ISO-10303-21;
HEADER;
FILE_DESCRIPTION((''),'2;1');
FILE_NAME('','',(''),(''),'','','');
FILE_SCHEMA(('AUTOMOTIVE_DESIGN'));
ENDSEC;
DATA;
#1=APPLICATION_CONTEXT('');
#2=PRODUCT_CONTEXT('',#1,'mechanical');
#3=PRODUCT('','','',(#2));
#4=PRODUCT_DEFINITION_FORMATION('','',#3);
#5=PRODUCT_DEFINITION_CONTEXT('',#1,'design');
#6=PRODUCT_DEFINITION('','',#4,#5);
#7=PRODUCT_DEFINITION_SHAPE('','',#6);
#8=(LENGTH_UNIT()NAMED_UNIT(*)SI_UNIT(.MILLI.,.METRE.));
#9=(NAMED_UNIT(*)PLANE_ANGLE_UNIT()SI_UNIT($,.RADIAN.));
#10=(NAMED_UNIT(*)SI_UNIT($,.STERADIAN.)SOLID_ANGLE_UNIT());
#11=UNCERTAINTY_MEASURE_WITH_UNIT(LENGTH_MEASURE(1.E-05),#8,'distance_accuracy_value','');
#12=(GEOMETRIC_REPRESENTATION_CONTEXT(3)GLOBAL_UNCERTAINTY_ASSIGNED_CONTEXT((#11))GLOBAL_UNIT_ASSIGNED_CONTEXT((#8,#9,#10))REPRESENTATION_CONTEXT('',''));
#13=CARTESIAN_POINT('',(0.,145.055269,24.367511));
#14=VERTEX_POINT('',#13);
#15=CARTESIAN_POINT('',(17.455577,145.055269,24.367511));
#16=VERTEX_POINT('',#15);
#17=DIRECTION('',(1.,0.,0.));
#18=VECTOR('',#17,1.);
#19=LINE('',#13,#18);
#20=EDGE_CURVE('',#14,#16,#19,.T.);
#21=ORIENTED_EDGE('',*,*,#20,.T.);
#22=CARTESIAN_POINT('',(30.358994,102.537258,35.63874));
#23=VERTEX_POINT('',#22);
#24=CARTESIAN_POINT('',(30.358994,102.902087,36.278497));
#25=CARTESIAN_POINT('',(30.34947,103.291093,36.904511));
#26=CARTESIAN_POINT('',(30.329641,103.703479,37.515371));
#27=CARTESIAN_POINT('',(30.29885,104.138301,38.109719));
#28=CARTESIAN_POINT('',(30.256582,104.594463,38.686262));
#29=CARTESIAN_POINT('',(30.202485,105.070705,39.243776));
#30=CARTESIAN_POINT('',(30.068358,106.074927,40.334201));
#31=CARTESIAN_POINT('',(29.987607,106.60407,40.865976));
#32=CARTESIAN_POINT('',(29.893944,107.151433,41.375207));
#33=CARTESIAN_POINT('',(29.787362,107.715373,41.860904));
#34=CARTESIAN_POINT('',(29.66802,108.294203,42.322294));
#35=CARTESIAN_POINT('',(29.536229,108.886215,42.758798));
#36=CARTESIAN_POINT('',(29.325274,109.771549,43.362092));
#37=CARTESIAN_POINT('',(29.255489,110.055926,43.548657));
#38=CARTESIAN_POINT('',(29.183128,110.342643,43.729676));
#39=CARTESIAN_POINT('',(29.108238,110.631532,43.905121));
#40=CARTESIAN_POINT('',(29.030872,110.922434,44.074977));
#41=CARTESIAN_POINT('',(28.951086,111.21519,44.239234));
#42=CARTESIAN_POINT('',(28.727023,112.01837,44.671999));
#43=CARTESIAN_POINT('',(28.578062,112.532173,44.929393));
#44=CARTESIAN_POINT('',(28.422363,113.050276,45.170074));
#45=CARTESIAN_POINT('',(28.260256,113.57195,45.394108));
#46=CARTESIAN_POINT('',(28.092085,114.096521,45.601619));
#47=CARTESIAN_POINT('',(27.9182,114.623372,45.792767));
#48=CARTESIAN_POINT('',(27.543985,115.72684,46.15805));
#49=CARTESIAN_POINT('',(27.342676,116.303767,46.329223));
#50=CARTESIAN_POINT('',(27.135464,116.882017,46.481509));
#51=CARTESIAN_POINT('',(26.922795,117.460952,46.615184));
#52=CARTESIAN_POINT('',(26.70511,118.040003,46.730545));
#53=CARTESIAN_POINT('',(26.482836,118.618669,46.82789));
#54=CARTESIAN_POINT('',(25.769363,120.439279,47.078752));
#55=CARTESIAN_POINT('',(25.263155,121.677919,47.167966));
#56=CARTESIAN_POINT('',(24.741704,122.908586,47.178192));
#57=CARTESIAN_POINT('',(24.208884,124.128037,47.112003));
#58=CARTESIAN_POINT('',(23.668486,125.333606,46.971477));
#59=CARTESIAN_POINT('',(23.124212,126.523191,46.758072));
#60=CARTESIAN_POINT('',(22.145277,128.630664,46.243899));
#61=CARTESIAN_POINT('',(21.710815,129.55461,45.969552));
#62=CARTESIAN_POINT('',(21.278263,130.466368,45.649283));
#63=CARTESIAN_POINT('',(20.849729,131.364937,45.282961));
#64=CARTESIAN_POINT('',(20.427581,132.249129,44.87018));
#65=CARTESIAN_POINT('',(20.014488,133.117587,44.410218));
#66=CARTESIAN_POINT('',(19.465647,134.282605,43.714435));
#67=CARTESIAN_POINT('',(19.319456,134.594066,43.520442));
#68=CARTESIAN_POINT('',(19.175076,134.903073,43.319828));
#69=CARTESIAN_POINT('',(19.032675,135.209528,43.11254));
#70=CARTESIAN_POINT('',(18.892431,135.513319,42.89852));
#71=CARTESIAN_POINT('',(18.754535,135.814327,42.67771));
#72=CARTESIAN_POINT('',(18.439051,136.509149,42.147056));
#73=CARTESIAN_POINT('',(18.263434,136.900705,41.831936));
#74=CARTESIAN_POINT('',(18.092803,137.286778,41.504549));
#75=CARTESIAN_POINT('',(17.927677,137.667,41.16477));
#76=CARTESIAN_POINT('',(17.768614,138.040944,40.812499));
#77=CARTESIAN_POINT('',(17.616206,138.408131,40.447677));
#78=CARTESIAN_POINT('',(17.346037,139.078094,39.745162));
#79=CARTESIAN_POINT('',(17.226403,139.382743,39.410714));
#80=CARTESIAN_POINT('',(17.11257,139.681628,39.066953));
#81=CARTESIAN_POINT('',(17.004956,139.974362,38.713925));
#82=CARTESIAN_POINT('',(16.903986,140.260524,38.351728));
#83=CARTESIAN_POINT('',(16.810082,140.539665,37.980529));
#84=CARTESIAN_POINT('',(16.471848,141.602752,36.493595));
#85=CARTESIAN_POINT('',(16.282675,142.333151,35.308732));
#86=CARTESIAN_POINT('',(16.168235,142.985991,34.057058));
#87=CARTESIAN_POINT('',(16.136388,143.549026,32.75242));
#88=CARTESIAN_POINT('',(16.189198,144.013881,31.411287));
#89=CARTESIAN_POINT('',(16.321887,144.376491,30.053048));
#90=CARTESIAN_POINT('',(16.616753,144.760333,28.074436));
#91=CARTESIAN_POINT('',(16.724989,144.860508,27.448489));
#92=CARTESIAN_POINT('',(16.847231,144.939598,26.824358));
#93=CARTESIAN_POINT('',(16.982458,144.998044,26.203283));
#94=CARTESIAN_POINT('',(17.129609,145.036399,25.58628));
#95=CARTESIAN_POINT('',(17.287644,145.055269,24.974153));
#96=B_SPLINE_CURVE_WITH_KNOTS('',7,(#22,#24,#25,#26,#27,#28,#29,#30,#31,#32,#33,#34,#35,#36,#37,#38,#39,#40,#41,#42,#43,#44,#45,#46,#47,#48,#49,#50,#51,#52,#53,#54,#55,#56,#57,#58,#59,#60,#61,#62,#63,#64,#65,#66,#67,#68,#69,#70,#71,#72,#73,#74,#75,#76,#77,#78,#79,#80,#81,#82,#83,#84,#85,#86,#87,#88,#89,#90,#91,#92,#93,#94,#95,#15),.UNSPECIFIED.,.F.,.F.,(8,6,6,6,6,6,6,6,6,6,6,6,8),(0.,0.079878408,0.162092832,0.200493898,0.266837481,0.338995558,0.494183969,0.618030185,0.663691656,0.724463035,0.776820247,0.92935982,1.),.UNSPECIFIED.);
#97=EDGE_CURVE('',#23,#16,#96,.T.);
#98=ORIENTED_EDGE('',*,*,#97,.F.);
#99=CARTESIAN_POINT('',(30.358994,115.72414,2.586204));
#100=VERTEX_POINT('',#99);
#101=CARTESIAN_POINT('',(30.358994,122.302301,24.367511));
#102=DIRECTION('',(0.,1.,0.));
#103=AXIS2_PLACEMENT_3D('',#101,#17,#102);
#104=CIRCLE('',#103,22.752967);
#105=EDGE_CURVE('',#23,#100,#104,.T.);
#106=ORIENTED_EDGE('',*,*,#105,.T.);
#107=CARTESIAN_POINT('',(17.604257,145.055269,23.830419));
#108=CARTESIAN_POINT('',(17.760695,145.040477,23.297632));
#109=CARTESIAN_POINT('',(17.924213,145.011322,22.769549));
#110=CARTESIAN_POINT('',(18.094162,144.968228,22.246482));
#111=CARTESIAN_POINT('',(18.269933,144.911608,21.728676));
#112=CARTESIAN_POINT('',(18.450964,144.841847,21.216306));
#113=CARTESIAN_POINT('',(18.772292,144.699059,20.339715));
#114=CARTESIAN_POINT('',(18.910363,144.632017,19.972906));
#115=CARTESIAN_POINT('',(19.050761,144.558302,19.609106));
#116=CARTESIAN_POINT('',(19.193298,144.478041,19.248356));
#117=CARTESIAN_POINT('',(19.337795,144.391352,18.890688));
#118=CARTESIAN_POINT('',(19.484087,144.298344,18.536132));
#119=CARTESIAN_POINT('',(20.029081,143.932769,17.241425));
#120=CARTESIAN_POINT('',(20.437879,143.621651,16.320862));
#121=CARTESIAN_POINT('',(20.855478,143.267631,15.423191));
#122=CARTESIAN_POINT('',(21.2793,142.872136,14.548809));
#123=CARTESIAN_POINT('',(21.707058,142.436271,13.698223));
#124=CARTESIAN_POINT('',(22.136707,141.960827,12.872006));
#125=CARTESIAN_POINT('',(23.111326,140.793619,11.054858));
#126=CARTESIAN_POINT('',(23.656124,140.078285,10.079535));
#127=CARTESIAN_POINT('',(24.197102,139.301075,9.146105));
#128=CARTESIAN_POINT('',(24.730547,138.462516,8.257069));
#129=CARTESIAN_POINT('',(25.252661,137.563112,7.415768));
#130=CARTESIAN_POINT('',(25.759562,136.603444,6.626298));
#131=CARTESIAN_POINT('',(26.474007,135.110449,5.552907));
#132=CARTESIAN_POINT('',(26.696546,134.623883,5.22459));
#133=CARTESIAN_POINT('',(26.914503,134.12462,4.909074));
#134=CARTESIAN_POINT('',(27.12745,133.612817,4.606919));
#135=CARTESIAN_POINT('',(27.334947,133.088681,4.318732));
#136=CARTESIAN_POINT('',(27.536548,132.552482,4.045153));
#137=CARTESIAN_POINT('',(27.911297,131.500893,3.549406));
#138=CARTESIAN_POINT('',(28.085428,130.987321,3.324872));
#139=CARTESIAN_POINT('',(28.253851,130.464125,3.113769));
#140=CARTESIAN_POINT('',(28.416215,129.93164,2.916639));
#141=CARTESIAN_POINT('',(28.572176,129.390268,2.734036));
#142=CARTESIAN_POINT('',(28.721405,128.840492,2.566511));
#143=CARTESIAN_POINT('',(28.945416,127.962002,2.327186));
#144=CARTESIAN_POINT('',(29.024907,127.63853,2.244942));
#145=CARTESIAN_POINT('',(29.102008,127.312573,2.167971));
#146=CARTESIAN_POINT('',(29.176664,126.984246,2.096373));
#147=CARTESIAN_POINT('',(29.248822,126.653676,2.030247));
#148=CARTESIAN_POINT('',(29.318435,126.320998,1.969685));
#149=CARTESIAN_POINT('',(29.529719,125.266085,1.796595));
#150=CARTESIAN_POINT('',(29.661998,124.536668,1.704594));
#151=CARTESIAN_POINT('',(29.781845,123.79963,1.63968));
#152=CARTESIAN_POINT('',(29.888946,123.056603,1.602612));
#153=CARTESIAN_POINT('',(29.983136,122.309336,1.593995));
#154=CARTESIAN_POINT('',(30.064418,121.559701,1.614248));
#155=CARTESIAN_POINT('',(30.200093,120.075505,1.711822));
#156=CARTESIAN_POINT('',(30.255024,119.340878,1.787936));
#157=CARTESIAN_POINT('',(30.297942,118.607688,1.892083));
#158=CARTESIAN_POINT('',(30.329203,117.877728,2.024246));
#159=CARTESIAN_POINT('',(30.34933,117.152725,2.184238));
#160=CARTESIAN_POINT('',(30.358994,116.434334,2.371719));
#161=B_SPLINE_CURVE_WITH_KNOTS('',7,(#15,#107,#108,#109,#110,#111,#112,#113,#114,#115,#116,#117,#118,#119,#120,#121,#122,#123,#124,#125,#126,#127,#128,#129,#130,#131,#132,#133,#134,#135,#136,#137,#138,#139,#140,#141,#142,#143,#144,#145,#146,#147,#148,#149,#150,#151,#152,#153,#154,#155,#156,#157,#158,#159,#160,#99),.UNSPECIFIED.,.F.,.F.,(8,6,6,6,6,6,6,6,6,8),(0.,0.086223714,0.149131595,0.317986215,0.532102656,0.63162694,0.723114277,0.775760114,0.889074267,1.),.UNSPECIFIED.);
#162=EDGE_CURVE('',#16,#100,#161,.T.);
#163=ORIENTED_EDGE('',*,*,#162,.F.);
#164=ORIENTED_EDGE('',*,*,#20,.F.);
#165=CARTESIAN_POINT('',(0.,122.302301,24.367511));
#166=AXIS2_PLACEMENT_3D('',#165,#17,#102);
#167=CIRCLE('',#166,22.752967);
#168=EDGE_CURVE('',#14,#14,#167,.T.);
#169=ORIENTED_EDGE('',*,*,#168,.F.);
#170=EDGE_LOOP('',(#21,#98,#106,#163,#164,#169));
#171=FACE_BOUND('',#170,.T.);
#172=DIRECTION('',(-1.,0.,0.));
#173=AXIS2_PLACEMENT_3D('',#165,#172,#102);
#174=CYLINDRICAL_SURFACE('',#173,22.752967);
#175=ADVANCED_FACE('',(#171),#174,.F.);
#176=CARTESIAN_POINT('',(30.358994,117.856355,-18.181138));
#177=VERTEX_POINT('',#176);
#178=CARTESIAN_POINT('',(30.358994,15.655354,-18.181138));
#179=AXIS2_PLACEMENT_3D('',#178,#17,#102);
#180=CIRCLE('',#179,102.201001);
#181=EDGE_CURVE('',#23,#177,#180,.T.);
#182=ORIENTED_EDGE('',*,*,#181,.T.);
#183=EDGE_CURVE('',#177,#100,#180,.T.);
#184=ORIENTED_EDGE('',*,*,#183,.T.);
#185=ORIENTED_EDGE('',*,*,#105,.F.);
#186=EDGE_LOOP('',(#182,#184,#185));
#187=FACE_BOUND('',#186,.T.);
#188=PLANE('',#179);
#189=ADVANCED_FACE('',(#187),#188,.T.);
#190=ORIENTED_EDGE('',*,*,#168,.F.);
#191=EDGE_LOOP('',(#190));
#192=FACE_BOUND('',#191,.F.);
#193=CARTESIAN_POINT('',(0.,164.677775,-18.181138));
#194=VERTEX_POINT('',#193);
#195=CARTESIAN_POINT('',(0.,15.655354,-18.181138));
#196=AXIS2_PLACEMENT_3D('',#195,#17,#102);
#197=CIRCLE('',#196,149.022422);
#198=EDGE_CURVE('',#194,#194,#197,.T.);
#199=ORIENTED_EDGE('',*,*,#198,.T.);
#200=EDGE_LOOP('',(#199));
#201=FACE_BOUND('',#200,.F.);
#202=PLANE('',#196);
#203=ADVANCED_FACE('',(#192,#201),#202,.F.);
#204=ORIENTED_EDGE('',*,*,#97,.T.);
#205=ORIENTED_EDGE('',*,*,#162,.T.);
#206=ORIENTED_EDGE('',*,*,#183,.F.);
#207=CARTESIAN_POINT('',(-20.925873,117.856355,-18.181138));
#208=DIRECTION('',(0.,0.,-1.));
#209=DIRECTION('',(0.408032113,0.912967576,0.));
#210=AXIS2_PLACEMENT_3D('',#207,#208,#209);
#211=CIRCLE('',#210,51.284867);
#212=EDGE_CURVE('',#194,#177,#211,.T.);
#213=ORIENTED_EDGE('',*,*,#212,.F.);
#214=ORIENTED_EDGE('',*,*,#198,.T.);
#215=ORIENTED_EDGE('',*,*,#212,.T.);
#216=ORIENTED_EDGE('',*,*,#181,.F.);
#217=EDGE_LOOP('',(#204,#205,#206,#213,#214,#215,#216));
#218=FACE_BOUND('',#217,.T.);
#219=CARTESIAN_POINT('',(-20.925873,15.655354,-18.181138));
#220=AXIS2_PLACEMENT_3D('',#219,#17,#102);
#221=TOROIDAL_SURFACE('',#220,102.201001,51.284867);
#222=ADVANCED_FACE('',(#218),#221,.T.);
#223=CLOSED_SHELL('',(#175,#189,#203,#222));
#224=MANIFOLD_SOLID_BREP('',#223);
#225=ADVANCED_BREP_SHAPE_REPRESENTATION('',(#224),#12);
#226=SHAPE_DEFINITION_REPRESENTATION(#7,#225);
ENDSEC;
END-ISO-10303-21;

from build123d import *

# Parameters (mm, degrees)
F0_R     = 149.022421697
F0_R_2   = 22.7529674453
F1_DEPTH = 30.3589943796


# Not quite as in the source:
# - a fillet or chamfer that OpenCascade refuses, or shapes differently, is made with other operations: its cross-section is extruded or revolved along the edge and cut away or added


with BuildPart() as f1:
    # F0 (on Right) → F1 (new body)
    with BuildSketch(Plane.YZ):
        with Locations((15.6553536654, -18.1811377406)):
            Circle(F0_R)
        with Locations((122.302301228, 24.3675112724)):
            Circle(F0_R_2, mode=Mode.SUBTRACT)
    extrude(amount=F1_DEPTH)

    # F2: fillet of radius 51.2848670586 on 1 edges, made by hand

    # F2_s1 → F2_t2 (revolve, cut)
    with BuildSketch(Plane.XY.offset(-18.1811377406)):
        with BuildLine():
            ThreePointArc((0, 164.6777753623), (22.105035908, 145.7575820929), (30.3589943796, 117.8563546038))
            Line((30.3589943796, 117.8563546038), (30.3589943796, 164.6777753623))
            Line((30.3589943796, 164.6777753623), (0, 164.6777753623))
        make_face()
    revolve(axis=Axis((30.3589943796, 15.6553536654, -18.1811377406), (1, 0, 0)), mode=Mode.SUBTRACT)


solid = f1.part
